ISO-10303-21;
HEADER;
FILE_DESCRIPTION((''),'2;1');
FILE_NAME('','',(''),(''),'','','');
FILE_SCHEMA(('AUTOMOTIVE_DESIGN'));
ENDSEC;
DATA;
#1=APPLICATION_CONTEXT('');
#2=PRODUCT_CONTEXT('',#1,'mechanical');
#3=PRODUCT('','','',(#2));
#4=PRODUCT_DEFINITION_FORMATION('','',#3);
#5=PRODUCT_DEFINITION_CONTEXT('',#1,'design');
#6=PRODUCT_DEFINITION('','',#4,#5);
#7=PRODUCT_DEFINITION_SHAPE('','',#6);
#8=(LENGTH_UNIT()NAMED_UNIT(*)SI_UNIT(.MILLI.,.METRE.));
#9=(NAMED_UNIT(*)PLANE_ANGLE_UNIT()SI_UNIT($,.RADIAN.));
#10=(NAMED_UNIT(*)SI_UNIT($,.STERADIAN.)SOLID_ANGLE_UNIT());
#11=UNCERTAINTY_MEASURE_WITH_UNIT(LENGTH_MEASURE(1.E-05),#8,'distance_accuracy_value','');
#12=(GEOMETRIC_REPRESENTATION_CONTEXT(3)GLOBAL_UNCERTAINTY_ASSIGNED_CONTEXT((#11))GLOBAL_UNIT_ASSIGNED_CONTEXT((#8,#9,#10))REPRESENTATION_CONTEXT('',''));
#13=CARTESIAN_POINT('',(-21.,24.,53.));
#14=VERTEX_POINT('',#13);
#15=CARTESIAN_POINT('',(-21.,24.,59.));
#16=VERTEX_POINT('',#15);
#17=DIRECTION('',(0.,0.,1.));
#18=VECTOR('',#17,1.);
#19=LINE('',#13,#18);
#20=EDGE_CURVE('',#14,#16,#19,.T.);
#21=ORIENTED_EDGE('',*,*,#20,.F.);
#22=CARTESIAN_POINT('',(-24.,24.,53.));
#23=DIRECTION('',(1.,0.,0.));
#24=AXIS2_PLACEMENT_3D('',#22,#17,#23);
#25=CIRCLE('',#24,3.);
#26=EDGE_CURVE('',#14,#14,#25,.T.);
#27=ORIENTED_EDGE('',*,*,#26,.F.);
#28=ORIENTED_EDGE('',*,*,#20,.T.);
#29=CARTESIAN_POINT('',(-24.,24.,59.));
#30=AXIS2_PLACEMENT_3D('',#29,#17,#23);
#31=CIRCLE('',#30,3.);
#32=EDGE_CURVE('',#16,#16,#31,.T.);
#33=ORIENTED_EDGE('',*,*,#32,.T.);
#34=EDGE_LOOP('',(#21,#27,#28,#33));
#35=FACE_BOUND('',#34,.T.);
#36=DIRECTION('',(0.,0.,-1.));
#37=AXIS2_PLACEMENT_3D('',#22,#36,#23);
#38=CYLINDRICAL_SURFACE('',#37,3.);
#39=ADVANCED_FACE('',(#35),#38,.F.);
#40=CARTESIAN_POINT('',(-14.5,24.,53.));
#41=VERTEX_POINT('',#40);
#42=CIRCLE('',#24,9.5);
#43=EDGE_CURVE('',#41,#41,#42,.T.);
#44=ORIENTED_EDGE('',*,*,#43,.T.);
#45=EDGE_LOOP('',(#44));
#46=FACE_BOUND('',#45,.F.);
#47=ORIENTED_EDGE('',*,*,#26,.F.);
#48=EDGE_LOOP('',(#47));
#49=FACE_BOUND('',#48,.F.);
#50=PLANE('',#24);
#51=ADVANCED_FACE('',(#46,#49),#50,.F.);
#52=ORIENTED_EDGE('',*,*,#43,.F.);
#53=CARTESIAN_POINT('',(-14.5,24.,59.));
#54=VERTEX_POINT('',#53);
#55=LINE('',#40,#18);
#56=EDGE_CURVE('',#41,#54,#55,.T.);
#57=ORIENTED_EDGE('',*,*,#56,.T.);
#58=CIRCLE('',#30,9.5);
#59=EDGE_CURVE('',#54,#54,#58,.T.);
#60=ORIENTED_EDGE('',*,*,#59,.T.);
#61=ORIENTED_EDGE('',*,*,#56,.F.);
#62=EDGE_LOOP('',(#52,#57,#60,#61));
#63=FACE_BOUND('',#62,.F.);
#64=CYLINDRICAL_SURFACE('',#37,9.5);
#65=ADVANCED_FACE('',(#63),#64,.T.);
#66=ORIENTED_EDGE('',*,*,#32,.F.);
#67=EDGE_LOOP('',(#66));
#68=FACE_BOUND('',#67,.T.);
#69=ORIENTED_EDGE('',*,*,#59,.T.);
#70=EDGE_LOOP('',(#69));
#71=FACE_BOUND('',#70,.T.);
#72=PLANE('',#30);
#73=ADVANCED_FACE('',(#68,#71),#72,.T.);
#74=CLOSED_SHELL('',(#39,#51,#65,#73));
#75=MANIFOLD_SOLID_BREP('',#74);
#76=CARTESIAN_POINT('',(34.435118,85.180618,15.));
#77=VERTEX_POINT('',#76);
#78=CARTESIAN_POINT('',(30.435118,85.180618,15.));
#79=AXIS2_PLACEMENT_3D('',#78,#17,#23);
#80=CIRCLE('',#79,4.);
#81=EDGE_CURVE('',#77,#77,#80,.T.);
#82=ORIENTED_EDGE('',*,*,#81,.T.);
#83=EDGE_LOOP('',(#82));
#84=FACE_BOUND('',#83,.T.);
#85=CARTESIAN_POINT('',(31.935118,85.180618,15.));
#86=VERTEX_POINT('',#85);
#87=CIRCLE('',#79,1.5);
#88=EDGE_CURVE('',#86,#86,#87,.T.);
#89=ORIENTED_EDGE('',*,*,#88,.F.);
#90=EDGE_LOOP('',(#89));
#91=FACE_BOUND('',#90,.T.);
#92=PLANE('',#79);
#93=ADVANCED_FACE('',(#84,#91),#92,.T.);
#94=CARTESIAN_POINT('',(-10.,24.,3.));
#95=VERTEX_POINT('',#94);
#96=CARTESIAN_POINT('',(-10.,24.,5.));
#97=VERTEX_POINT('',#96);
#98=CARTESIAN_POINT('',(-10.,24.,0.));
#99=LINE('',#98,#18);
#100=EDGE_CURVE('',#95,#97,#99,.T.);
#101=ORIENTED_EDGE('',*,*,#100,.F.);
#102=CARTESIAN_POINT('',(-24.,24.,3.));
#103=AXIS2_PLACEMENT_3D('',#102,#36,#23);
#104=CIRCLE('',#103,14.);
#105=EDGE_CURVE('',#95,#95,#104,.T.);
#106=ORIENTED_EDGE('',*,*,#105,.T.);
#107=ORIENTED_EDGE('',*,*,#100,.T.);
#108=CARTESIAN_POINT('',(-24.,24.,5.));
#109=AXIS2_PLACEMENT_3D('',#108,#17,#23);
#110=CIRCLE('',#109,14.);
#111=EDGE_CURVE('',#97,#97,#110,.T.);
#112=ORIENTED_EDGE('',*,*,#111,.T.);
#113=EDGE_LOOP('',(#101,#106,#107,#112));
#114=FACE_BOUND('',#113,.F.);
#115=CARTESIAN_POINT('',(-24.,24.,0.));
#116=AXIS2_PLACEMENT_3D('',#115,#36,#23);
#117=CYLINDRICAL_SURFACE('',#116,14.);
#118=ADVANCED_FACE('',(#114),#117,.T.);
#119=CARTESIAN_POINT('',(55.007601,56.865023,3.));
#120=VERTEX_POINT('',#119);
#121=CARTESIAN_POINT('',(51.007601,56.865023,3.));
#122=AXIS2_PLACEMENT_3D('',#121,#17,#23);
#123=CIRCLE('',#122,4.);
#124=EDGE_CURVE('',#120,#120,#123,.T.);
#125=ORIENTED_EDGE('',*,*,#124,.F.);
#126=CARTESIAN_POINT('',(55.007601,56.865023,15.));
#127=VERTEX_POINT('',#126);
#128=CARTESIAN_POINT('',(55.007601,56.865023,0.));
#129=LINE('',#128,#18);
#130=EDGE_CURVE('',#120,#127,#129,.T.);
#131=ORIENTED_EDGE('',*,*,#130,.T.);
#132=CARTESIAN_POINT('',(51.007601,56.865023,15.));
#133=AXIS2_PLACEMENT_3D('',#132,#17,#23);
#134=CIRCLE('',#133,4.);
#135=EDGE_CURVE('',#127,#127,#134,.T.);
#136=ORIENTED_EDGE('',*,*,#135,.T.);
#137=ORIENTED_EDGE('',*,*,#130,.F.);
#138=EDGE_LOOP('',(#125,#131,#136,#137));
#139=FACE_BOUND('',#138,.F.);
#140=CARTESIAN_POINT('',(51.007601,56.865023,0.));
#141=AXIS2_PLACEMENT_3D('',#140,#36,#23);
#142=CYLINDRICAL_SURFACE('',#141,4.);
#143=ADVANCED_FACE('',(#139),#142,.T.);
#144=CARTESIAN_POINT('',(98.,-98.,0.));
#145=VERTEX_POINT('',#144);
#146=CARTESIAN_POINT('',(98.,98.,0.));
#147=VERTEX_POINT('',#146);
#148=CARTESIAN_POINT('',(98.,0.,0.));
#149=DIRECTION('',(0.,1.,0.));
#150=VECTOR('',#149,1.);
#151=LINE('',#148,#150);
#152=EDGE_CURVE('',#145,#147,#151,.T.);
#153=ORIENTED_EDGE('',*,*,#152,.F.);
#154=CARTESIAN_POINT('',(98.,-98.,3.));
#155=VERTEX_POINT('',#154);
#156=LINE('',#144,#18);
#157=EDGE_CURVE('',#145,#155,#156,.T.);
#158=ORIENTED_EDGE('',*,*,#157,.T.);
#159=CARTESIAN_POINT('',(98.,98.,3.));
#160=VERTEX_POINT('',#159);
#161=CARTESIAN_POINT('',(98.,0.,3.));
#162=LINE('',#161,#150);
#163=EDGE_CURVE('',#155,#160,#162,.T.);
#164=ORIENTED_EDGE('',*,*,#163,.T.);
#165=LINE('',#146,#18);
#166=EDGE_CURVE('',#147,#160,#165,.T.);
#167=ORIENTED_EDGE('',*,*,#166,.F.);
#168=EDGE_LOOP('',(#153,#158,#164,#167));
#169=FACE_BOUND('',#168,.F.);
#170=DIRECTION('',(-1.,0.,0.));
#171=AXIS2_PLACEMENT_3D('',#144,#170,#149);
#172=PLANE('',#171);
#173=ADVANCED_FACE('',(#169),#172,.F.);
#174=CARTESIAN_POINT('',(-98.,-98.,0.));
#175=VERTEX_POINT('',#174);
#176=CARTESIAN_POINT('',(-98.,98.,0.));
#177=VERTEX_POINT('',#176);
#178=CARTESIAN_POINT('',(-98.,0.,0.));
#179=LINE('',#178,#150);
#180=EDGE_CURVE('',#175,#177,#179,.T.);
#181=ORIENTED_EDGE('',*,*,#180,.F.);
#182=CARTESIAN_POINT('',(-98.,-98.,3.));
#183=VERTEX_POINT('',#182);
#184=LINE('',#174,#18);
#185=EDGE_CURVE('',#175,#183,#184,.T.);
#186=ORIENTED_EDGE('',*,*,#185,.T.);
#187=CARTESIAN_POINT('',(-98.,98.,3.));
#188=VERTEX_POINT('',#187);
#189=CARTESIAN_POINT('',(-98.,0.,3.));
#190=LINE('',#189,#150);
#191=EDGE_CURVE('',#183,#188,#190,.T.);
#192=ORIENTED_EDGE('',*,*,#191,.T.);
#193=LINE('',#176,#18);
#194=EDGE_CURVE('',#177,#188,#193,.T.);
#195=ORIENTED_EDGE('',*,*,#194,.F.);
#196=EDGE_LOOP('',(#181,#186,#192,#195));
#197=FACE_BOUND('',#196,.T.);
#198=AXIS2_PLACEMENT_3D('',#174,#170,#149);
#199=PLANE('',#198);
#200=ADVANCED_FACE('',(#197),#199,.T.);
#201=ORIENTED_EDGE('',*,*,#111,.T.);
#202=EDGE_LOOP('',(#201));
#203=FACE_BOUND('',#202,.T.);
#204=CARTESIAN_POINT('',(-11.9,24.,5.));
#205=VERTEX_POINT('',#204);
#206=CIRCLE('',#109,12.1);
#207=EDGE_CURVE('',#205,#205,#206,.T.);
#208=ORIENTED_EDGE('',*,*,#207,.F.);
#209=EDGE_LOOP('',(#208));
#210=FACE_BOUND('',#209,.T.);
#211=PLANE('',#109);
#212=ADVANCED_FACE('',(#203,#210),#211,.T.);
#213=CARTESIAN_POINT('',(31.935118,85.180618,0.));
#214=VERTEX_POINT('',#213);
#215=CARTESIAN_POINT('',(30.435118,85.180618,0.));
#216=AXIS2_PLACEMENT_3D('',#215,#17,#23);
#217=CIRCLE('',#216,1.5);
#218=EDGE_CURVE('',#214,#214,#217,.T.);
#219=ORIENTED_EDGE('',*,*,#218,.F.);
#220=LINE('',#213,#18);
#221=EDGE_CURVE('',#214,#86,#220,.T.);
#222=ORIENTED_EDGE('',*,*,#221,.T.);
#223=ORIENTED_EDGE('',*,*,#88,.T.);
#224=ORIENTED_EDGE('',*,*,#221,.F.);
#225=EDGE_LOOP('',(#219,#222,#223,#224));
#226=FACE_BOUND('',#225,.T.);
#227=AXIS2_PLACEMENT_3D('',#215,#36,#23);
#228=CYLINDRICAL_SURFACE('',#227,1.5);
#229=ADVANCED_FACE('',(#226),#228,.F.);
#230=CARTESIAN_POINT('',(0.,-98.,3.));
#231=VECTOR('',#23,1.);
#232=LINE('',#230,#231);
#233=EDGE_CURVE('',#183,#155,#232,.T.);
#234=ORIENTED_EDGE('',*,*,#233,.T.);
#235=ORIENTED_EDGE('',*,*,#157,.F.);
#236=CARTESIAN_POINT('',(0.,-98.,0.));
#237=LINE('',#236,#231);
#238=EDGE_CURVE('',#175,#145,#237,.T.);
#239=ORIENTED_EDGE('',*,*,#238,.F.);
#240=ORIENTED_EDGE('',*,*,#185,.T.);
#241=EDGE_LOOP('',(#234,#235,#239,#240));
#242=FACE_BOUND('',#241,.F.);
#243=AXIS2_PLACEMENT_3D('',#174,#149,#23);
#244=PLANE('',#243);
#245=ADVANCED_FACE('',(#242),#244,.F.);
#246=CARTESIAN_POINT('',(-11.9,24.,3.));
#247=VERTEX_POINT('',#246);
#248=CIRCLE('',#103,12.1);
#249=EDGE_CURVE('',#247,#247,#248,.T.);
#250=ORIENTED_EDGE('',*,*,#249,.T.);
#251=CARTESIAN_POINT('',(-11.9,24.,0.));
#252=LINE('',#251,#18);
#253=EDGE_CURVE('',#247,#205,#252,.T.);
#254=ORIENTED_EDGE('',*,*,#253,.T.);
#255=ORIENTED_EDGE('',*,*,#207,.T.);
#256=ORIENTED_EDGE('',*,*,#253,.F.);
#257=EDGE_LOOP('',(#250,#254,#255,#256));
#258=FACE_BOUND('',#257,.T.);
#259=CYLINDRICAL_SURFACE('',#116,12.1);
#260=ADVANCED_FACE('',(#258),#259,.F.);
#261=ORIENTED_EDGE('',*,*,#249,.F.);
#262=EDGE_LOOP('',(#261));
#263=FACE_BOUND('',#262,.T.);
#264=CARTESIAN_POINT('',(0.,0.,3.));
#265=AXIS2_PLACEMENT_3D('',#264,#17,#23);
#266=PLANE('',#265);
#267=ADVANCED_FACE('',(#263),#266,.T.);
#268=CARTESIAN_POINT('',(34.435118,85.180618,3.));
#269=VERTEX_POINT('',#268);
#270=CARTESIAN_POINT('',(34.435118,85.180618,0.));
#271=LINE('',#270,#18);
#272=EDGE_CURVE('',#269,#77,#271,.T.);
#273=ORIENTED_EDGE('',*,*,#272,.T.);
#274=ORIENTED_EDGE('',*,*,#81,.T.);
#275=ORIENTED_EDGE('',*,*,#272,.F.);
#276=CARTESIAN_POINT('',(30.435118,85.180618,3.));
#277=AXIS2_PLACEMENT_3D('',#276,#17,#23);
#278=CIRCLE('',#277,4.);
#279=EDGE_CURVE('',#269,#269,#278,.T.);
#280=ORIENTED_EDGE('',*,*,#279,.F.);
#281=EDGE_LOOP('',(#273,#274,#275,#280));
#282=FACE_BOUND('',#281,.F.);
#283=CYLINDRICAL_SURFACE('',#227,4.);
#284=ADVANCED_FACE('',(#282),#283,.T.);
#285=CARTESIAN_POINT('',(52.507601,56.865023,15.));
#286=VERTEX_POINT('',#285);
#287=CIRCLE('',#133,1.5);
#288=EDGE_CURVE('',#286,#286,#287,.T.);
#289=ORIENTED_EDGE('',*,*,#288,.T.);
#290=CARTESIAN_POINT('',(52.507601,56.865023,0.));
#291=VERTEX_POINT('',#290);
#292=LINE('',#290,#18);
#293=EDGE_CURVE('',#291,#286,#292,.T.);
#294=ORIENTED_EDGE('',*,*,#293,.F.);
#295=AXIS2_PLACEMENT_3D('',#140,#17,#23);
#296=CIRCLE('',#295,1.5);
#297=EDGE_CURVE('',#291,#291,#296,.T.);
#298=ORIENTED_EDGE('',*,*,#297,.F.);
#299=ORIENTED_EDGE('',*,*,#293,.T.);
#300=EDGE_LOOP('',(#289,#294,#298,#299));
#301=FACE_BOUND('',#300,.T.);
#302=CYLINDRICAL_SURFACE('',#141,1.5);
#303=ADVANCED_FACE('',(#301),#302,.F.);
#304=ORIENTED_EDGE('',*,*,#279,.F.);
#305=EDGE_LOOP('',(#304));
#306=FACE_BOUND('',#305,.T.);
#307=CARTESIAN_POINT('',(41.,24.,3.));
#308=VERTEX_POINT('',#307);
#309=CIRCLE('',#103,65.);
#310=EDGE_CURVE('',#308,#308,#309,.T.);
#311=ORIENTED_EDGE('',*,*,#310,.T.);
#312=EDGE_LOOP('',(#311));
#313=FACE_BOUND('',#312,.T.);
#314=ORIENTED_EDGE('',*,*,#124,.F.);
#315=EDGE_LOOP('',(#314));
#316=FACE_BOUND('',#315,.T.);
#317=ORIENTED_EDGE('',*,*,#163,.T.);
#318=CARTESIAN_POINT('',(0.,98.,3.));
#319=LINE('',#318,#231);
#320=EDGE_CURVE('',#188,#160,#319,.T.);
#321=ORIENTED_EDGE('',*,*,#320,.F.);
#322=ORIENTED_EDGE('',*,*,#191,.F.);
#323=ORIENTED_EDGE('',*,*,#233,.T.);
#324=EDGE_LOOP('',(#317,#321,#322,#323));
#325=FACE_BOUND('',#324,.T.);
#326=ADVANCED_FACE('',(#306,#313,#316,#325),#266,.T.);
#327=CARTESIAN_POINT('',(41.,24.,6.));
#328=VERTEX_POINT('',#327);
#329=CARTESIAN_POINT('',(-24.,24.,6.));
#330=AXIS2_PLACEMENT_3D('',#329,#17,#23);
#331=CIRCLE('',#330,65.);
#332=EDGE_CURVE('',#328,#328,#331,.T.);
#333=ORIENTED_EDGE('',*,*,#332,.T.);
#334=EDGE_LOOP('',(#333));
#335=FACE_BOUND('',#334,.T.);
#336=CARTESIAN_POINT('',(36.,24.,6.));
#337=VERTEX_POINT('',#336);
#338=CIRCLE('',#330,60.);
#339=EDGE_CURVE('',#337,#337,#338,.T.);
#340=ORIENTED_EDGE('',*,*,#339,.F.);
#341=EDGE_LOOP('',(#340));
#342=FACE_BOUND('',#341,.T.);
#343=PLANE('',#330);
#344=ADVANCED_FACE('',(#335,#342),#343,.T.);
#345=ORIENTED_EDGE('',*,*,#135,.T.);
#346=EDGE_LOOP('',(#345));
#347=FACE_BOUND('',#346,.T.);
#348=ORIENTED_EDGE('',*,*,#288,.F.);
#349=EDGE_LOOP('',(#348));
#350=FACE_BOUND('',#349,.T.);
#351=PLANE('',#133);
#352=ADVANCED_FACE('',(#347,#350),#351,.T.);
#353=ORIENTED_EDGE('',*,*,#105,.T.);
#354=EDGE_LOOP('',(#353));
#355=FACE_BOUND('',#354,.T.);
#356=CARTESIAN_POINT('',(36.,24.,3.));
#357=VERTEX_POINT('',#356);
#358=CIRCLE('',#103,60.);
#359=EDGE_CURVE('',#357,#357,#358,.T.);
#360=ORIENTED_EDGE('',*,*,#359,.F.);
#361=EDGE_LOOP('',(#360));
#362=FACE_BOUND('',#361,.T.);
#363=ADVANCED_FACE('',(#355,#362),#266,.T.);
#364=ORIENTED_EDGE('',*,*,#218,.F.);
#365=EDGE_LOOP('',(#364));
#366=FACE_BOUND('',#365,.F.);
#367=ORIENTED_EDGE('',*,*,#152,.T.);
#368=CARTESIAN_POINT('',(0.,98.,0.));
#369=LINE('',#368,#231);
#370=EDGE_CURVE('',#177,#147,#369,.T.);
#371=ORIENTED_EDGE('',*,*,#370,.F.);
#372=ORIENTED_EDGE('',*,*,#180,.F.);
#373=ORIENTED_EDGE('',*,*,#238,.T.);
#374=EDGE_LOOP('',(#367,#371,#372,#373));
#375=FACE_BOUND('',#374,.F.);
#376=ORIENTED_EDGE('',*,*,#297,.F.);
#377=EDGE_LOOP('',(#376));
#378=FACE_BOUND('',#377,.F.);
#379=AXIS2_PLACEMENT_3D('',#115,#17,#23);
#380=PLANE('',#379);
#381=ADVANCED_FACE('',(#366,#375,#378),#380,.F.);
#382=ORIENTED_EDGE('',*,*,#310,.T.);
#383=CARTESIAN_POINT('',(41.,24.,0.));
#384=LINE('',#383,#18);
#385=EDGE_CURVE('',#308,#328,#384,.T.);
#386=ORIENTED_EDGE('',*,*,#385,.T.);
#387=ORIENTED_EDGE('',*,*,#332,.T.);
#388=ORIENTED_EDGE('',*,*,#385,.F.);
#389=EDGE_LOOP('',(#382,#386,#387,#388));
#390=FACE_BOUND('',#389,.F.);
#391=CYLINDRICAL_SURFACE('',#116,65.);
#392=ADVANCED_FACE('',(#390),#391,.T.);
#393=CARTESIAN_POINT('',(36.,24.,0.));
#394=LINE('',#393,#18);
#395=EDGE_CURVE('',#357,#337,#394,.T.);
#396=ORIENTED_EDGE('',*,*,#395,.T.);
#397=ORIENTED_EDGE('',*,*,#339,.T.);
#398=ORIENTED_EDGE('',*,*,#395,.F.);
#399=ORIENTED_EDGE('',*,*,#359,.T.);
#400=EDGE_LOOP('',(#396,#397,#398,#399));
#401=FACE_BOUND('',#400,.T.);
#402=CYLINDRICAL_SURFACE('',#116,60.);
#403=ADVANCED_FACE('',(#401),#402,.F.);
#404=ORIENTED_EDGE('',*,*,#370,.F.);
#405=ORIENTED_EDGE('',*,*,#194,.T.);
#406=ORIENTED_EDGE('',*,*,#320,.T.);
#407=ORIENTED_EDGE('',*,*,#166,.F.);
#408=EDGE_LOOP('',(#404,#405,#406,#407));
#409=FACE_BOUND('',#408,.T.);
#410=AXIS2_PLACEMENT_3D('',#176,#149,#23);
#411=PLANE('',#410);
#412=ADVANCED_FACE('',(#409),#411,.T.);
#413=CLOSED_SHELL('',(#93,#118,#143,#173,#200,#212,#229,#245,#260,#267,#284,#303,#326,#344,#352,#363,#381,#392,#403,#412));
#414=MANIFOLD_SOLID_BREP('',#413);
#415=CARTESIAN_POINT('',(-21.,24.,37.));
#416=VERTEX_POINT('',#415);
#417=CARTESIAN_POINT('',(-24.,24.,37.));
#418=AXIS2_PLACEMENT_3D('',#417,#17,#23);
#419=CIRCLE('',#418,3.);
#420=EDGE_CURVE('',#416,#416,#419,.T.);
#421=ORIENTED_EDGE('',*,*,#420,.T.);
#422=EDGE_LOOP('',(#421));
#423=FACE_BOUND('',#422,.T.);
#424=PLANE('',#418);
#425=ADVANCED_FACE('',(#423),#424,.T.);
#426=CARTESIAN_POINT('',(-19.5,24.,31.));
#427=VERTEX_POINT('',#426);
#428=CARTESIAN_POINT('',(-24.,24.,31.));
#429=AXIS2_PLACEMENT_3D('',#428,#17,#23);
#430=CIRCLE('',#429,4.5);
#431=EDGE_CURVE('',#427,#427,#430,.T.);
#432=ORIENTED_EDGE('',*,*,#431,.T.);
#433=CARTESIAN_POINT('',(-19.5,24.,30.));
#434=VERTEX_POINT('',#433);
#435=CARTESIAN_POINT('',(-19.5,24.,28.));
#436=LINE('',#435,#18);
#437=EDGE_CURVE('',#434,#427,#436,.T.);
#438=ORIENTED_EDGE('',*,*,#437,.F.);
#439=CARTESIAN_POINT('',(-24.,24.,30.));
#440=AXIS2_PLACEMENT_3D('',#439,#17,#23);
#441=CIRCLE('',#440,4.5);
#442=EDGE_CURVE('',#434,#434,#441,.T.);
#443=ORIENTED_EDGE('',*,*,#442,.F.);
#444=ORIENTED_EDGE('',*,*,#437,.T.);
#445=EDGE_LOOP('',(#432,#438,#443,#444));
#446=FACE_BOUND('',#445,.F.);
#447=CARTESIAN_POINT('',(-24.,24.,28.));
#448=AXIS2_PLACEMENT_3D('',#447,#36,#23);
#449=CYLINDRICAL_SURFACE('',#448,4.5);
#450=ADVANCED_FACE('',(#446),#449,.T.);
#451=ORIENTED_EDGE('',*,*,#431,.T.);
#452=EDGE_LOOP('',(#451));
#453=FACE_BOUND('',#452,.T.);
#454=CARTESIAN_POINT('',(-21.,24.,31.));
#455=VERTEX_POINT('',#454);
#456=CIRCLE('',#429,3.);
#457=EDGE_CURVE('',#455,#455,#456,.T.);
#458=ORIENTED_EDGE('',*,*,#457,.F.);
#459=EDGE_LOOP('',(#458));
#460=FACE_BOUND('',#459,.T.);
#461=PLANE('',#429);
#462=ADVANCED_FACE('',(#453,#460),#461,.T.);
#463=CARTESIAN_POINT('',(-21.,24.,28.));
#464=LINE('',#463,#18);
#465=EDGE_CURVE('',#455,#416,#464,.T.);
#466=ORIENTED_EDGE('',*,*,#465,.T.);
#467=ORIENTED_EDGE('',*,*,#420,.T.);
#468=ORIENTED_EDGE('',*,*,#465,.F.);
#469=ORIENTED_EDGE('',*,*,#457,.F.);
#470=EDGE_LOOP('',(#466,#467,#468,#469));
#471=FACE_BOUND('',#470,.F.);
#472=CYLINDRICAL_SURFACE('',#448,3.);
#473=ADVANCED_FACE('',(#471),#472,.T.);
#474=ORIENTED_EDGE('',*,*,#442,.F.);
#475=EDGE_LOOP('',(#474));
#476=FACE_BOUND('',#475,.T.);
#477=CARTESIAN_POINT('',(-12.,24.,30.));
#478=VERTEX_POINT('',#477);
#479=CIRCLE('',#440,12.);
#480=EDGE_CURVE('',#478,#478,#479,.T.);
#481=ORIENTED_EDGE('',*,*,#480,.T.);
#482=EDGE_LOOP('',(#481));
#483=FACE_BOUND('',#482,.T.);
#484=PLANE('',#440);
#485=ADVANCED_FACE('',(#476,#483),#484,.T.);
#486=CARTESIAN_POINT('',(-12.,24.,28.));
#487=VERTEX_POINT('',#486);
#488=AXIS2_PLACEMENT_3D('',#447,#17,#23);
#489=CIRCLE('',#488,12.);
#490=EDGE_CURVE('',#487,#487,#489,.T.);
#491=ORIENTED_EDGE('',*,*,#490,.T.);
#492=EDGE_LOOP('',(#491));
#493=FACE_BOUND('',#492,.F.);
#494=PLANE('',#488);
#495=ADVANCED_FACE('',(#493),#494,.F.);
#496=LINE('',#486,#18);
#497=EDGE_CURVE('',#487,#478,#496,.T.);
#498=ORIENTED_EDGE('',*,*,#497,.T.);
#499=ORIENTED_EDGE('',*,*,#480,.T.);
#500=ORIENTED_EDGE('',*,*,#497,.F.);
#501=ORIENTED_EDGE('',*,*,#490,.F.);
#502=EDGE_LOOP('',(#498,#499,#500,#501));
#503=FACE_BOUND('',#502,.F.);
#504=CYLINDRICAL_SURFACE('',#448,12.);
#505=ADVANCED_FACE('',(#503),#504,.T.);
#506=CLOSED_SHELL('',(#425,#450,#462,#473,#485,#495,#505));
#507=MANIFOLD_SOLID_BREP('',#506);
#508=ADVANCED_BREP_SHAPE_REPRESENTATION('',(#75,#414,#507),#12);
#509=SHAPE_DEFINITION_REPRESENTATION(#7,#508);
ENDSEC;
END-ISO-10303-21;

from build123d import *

# Parameters (mm, degrees)
F0_W      = 196
F0_H      = 196
F0_R      = 65
F0_R_2    = 4
F0_R_3    = 60
F0_R_4    = 14
F0_R_5    = 12.1
F1_DEPTH  = 3
F0_R_6    = 1.5
F2_DEPTH  = 15
F4_R      = 12
F4_R_2    = 4.5
F5_DEPTH  = 2
F4_R_3    = 3
F6_DEPTH  = 3
F7_DEPTH  = 9
F8_DEPTH  = 5
F10_R     = 9.5
F10_R_2   = 3
F11_DEPTH = 6
F12_DEPTH = 6


# Not quite as in the source:
# - a feature names something its author has since deleted; it is built from what else it names


with BuildPart() as f1:
    # F0 (on Top) → F1 (new body)
    with BuildSketch(Plane.XY):
        Rectangle(F0_W, F0_H)
        with Locations((-24, 24)):
            Circle(F0_R, mode=Mode.SUBTRACT)
        with Locations((30.4351176349, 85.180617585)):
            Circle(F0_R_2, mode=Mode.SUBTRACT)
        with Locations((51.0076014651, 56.8650227818)):
            Circle(F0_R_2, mode=Mode.SUBTRACT)
        with Locations((-24, 24)):
            Circle(F0_R)
        with Locations((-24, 24)):
            Circle(F0_R_3, mode=Mode.SUBTRACT)
        with Locations((-24, 24)):
            Circle(F0_R_3)
        with Locations((-24, 24)):
            Circle(F0_R_4, mode=Mode.SUBTRACT)
        with Locations((-24, 24)):
            Circle(F0_R_4)
        with Locations((-24, 24)):
            Circle(F0_R_5, mode=Mode.SUBTRACT)
        with Locations((-24, 24)):
            Circle(F0_R_5)
    extrude(amount=F1_DEPTH)

    # F0 (on Top) → F2 (join)
    with BuildSketch(Plane.XY):
        with Locations((30.4351176349, 85.180617585)):
            Circle(F0_R_2)
        with Locations((30.4351176349, 85.180617585)):
            Circle(F0_R_6, mode=Mode.SUBTRACT)
        with Locations((51.0076014651, 56.8650227818)):
            Circle(F0_R_2)
        with Locations((51.0076014651, 56.8650227818)):
            Circle(F0_R_6, mode=Mode.SUBTRACT)
    extrude(amount=F2_DEPTH)

    # F0 (on Top) → F8 (join)
    with BuildSketch(Plane.XY):
        with Locations((-24, 24)):
            Circle(F0_R_4)
        with Locations((-24, 24)):
            Circle(F0_R_5, mode=Mode.SUBTRACT)
    extrude(amount=F8_DEPTH)

    # F0 (on Top) → F12 (join)
    with BuildSketch(Plane.XY):
        with Locations((-24, 24)):
            Circle(F0_R)
        with Locations((-24, 24)):
            Circle(F0_R_3, mode=Mode.SUBTRACT)
    extrude(amount=F12_DEPTH)


with BuildPart() as f5:
    # F4 (on offset) → F5 (new body)
    with BuildSketch(Plane.XY.offset(28)):
        with Locations((-24, 24)):
            Circle(F4_R)
        with Locations((-24, 24)):
            Circle(F4_R_2, mode=Mode.SUBTRACT)
    extrude(amount=F5_DEPTH)

    # F4 (on offset) → F6 (join)
    with BuildSketch(Plane.XY.offset(28)):
        with Locations((-24, 24)):
            Circle(F4_R_2)
        with Locations((-24, 24)):
            Circle(F4_R_3, mode=Mode.SUBTRACT)
    extrude(amount=F6_DEPTH)

    # F4 (on offset) → F7 (join)
    with BuildSketch(Plane.XY.offset(28)):
        with Locations((-24, 24)):
            Circle(F4_R_3)
    extrude(amount=F7_DEPTH)


with BuildPart() as f11:
    # F10 (on offset) → F11 (new body)
    with BuildSketch(Plane.XY.offset(53)):
        with Locations((-24, 24)):
            Circle(F10_R)
        with Locations((-24, 24)):
            Circle(F10_R_2, mode=Mode.SUBTRACT)
    extrude(amount=F11_DEPTH)


solid = Compound([f1.part, f5.part, f11.part])
